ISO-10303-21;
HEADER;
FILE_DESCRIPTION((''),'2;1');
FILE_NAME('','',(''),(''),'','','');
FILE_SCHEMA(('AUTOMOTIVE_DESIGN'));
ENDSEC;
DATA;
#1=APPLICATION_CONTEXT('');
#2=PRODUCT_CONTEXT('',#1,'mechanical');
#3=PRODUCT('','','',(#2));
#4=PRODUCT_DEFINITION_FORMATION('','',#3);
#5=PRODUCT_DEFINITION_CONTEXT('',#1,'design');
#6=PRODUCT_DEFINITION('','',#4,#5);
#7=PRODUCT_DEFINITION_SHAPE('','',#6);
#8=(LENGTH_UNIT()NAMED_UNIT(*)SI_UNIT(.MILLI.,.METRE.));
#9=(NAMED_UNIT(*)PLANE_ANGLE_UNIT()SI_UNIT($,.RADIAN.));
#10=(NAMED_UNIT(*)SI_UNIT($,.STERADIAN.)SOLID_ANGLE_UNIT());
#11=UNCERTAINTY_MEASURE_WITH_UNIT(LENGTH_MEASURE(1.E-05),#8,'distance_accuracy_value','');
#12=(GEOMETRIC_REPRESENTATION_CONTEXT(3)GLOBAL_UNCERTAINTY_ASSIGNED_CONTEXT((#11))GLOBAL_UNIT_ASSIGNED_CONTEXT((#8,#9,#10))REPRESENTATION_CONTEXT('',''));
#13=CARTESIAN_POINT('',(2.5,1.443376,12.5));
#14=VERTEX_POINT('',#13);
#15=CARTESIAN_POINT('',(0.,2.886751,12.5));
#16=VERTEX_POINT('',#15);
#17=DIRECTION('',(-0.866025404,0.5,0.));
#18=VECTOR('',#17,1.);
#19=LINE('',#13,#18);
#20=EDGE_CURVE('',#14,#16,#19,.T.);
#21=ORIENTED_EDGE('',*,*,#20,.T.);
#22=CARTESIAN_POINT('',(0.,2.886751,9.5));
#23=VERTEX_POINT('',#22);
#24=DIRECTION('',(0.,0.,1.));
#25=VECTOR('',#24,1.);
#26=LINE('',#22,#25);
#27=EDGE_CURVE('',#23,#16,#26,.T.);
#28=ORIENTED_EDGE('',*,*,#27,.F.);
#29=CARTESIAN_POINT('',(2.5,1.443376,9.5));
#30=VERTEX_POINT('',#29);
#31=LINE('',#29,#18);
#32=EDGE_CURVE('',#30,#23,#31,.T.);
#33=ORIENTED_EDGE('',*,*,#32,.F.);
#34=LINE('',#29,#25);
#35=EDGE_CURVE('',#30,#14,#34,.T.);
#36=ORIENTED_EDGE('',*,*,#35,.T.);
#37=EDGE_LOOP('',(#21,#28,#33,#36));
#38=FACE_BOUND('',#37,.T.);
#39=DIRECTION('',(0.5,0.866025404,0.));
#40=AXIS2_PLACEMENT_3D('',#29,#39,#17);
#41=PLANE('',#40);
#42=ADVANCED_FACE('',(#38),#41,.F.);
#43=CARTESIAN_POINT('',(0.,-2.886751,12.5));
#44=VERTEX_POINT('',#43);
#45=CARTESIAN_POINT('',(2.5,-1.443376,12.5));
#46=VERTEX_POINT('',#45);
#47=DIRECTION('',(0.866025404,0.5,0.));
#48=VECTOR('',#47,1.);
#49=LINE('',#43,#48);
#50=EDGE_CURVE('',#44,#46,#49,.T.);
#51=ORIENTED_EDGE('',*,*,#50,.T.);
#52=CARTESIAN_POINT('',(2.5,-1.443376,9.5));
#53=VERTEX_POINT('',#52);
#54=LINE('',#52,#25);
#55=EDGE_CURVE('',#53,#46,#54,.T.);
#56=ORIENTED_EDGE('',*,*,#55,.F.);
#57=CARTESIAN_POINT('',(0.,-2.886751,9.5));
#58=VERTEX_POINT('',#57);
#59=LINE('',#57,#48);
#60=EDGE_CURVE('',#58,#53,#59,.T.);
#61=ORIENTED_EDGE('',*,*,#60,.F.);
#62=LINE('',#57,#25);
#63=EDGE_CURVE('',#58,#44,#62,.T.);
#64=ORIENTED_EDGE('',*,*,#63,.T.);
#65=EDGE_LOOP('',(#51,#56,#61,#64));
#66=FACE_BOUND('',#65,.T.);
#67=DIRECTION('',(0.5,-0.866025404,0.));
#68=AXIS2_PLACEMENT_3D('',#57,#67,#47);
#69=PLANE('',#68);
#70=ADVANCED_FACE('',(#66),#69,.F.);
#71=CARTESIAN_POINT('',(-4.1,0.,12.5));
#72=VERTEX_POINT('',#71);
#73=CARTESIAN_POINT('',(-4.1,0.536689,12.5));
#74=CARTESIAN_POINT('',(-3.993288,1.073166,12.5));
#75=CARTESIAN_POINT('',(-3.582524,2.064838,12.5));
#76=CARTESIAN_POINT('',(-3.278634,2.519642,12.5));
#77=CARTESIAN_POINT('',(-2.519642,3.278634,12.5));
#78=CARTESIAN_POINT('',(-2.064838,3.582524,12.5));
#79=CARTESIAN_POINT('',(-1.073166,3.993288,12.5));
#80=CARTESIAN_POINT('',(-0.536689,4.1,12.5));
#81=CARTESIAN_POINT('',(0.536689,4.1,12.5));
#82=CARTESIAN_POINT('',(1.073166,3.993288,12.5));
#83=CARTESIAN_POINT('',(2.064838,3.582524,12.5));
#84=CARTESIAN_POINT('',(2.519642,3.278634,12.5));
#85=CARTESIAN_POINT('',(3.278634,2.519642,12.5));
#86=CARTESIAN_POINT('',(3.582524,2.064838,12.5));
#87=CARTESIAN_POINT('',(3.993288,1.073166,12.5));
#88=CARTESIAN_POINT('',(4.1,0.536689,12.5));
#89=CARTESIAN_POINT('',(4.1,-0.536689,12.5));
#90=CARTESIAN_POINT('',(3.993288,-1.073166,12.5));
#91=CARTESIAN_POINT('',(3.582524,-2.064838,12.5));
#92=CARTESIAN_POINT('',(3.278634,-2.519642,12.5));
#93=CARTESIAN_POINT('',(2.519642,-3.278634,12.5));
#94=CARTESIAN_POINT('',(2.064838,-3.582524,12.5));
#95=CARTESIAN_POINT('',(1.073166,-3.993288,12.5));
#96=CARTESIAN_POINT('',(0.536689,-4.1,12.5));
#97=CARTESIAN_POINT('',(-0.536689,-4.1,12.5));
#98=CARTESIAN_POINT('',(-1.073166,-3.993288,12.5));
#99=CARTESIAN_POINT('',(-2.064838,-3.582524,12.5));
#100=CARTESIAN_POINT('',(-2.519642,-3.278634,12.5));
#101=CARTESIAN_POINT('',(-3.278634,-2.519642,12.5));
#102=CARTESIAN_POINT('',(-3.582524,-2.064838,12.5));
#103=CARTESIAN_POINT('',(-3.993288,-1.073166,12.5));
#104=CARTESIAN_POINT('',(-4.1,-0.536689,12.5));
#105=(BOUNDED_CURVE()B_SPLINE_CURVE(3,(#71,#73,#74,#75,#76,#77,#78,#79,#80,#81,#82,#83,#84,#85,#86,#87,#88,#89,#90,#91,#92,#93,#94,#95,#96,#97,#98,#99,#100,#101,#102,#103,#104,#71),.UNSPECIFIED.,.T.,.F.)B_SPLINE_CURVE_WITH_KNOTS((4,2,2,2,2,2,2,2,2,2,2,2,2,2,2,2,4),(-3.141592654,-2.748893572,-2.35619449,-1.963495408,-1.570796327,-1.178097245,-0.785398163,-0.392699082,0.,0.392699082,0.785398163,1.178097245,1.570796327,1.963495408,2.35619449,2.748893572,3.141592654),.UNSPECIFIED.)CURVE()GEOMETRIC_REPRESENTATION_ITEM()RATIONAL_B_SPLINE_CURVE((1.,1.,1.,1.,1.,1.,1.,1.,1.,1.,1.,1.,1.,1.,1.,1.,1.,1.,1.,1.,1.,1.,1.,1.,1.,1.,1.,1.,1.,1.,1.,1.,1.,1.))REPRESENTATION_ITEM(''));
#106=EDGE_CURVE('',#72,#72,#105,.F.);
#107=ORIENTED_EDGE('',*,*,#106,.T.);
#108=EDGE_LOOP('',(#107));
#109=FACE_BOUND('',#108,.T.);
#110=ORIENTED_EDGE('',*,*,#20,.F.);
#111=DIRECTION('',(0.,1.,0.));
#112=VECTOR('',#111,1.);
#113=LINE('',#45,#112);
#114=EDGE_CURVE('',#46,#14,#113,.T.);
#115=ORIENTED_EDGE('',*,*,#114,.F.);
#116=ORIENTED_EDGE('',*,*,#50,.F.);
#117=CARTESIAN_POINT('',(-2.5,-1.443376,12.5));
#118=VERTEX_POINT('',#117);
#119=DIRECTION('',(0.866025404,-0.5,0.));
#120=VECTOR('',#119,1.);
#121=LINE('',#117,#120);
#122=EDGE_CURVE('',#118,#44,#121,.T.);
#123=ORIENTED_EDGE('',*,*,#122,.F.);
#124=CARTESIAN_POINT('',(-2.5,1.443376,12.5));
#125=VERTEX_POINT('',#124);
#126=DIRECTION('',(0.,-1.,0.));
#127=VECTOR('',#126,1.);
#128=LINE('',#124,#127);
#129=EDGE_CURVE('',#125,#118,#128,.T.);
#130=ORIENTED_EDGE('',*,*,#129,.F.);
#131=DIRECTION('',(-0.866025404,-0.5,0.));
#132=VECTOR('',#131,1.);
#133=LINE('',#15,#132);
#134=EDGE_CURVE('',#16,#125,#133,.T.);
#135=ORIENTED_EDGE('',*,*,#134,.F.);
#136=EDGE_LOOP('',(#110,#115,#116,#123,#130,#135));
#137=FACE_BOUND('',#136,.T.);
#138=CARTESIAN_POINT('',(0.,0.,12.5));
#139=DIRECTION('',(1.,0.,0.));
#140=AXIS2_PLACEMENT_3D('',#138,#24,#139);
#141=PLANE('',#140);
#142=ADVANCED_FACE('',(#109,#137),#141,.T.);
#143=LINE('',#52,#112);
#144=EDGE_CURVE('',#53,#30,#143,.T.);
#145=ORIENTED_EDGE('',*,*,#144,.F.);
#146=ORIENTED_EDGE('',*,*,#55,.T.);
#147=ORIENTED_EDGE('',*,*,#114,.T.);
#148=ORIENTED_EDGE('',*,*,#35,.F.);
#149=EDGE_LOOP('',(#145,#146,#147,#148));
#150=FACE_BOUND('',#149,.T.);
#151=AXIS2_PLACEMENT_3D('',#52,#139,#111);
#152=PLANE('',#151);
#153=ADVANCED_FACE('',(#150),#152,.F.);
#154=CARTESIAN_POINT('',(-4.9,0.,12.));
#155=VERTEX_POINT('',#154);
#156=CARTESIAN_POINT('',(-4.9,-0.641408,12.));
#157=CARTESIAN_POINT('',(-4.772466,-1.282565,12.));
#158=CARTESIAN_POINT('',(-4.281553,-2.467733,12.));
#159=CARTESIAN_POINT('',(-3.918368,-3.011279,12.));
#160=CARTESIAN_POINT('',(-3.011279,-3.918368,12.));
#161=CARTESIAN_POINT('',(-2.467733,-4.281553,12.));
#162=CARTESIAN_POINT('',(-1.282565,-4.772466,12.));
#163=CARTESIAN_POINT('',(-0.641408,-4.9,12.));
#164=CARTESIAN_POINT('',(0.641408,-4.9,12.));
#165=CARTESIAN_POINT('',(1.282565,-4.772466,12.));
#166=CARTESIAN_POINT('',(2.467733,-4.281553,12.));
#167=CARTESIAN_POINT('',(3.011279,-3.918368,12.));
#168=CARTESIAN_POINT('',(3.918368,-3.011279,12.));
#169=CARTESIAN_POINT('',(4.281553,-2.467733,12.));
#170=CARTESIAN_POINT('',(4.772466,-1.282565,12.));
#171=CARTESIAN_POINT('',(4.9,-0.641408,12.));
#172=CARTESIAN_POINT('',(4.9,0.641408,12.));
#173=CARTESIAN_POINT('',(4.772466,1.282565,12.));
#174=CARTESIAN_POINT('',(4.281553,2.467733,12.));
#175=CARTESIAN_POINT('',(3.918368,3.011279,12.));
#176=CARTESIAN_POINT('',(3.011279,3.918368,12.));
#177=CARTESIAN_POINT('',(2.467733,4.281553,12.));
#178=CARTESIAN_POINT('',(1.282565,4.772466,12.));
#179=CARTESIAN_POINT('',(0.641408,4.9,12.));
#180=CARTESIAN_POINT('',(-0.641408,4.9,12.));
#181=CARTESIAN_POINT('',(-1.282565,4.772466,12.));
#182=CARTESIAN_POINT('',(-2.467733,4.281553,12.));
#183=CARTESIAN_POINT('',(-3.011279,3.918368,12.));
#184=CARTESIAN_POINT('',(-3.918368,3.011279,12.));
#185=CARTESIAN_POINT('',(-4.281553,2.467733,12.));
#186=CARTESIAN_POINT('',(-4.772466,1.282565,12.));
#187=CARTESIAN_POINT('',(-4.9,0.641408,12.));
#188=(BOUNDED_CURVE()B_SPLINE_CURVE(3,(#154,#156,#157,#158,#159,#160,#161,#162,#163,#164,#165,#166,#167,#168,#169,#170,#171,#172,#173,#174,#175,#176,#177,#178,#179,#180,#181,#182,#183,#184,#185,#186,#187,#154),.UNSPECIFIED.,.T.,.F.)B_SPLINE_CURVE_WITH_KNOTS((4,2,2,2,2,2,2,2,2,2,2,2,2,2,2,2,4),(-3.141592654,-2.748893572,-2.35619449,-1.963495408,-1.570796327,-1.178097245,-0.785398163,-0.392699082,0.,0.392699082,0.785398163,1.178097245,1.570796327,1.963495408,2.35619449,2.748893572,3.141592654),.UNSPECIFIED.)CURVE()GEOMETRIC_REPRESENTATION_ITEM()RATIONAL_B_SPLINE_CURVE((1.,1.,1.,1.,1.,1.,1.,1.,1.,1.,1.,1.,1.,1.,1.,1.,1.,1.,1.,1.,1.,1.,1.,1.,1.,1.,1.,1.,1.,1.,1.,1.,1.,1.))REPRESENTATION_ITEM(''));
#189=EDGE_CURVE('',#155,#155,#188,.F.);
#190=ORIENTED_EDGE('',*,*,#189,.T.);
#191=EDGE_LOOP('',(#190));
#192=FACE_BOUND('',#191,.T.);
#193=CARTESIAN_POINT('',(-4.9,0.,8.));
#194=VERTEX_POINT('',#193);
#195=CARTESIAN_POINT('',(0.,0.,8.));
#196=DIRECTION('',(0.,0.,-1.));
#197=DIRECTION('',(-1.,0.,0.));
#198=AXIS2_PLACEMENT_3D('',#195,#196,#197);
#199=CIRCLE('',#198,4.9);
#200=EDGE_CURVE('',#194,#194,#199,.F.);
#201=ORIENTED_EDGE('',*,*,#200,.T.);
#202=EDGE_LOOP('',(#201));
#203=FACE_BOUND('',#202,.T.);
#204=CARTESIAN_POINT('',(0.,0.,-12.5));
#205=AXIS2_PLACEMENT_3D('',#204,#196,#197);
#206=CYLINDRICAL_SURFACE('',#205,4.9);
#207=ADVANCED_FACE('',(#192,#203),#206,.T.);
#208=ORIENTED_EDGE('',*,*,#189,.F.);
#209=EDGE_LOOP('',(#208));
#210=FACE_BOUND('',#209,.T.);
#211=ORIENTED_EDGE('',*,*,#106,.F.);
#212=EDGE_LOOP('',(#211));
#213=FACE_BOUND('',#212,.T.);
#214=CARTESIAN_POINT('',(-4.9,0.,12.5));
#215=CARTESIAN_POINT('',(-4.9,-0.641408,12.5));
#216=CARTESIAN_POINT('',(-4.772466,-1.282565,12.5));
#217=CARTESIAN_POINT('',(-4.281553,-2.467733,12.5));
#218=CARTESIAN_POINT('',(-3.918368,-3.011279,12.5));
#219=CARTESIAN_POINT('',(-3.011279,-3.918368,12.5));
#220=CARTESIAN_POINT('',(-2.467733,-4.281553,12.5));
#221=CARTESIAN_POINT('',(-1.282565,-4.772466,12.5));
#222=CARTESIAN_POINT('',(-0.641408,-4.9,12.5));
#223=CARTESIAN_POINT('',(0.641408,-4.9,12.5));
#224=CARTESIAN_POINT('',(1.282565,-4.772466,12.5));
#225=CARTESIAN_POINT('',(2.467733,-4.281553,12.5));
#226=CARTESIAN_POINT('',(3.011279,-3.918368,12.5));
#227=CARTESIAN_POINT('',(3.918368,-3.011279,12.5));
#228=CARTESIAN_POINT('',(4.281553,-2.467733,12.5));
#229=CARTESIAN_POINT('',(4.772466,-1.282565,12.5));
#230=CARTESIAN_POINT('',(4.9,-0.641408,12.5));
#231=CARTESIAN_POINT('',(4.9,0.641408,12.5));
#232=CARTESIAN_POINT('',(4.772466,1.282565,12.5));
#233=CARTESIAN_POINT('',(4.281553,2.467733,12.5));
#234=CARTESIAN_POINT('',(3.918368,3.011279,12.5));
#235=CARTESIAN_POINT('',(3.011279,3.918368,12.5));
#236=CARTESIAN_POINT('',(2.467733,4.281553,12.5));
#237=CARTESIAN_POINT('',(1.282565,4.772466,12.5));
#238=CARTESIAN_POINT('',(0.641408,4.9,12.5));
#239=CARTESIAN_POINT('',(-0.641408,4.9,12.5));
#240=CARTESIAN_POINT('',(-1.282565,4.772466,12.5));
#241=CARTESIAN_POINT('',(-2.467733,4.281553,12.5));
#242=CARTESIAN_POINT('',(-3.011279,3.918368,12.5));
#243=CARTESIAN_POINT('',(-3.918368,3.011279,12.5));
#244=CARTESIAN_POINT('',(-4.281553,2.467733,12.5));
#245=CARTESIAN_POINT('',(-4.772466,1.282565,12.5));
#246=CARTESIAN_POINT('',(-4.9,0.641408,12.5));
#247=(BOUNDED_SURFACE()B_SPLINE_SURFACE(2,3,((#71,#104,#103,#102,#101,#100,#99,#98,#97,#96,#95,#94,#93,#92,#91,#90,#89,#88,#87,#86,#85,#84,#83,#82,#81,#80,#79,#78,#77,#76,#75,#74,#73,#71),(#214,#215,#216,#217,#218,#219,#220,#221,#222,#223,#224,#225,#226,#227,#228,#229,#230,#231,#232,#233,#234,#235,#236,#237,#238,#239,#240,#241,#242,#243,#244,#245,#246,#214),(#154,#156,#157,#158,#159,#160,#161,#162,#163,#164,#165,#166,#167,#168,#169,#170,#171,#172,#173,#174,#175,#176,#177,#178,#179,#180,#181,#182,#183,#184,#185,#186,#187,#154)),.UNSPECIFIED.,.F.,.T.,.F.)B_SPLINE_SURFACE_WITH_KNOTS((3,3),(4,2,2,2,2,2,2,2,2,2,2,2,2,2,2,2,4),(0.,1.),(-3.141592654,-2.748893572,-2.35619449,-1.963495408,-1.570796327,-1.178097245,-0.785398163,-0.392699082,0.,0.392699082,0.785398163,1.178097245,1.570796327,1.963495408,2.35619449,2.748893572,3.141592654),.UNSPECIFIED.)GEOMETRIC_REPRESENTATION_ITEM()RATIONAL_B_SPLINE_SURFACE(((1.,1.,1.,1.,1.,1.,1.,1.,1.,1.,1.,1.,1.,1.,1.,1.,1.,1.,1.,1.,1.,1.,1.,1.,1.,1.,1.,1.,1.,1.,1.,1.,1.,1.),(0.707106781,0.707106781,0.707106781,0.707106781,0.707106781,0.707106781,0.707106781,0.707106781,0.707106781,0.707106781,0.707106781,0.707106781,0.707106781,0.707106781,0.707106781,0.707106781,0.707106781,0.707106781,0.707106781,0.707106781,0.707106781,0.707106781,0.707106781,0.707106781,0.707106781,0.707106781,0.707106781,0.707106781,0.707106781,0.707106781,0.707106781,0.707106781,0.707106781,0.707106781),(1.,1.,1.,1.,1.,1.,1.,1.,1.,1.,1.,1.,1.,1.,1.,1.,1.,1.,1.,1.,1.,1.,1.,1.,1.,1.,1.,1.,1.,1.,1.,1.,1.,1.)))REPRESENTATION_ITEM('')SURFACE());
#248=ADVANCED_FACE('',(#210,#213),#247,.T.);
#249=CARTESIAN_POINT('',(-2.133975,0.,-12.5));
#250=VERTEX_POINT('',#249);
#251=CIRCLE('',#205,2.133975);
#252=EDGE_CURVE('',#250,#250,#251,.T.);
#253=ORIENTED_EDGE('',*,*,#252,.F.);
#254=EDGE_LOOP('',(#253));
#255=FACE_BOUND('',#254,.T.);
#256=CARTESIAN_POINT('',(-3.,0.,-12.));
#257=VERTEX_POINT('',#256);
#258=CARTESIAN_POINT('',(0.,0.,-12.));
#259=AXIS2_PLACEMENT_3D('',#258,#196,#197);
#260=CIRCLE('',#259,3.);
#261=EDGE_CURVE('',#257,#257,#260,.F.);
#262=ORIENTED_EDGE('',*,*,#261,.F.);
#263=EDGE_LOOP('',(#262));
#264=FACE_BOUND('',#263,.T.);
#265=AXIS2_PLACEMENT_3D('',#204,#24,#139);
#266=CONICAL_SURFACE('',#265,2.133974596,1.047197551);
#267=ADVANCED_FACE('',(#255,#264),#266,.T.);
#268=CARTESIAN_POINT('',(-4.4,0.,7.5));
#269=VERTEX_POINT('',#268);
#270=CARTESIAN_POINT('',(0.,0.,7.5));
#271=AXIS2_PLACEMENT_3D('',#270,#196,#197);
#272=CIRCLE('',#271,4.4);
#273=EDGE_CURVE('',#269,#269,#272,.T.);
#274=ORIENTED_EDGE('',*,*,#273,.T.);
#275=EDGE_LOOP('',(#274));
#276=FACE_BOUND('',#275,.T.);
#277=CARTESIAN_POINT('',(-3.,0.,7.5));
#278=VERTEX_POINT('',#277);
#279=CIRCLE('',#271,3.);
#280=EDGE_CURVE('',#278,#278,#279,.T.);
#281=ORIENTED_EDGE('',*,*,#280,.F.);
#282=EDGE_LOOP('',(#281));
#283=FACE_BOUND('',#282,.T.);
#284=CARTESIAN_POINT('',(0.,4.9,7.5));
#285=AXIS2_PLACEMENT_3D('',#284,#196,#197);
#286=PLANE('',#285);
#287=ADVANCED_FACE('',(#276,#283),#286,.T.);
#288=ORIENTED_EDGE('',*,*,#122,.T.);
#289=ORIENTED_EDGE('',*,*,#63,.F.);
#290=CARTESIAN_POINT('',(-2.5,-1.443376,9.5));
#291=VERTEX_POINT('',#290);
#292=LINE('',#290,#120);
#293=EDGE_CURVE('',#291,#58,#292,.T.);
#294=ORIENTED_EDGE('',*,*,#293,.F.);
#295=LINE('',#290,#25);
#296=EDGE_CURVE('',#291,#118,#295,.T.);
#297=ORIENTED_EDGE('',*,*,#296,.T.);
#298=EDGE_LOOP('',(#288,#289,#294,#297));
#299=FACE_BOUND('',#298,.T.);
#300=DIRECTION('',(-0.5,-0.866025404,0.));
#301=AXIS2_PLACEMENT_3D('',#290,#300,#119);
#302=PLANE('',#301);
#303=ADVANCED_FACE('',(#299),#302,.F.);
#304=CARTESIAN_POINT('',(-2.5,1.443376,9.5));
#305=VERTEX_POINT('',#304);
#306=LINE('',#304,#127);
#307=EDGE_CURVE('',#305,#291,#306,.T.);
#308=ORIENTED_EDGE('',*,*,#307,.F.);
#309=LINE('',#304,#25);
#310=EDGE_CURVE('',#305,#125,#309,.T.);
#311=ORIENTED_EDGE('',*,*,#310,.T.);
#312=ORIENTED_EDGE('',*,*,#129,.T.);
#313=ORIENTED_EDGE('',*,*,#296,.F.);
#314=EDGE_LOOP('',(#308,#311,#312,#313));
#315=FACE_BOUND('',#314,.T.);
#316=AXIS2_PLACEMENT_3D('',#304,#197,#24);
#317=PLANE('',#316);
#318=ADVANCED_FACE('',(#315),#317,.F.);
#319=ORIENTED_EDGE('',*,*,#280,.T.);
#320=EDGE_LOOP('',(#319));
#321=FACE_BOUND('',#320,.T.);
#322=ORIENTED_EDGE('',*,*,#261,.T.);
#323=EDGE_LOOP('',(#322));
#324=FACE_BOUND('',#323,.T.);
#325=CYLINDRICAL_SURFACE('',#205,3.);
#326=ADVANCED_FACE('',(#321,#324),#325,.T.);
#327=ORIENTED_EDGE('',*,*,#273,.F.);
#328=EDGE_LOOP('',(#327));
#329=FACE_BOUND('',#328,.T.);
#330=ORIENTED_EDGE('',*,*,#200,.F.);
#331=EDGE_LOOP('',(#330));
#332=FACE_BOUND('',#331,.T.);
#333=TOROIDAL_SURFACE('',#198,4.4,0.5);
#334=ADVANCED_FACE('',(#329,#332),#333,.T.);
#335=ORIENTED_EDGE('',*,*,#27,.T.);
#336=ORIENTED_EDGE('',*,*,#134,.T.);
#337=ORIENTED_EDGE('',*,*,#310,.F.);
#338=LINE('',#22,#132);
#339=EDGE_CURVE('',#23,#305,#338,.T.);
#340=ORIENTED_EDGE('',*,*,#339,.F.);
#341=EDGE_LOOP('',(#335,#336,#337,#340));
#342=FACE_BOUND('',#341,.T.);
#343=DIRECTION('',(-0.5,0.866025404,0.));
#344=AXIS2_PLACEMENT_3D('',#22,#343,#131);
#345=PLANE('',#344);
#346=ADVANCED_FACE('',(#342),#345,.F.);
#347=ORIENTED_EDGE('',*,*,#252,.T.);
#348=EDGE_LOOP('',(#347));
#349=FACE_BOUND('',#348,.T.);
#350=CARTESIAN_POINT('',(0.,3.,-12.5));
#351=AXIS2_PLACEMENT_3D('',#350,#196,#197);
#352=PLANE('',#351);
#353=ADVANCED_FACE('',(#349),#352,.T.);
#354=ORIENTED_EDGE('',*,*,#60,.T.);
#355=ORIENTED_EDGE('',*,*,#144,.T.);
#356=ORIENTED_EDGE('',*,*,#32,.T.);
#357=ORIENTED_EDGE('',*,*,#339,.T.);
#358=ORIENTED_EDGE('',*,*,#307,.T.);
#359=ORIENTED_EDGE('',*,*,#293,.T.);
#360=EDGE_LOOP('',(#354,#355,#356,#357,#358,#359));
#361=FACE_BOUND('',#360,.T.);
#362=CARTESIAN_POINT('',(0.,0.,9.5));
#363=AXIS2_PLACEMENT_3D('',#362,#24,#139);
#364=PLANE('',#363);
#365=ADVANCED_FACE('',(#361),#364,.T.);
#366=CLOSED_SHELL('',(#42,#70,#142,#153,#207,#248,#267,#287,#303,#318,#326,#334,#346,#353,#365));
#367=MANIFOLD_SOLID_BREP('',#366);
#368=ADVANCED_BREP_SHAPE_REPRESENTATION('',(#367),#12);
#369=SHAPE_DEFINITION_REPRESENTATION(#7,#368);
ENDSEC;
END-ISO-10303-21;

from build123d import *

# Parameters (mm, degrees)
FILLET_1_R          = 0.5
FILLET_2_SIZE       = 0.5
FILLET_2_SIZE_2     = 0.8
CHAMFER_1_SIZE      = 0.5
CHAMFER_1_SIZE2     = 0.866025404
CUT_EXTRUDE_1_DEPTH = 3


with BuildPart() as part:
    # 草图2 → 旋转1 (revolve)
    with BuildSketch(Plane(origin=(0, 0, 0), x_dir=(0, 0, -1), z_dir=(1, 0, 0)), mode=Mode.PRIVATE) as revolve_1_sk:
        Polygon((-12.5, 0), (-12.5, 4.9), (-7.5, 4.9), (-7.5, 3), (12.5, 3), (12.5, 0), align=None)
    revolve(revolve_1_sk.sketch.rotate(Axis((0, 0, -12.5), (0, 0, 1)), 90), axis=Axis((0, 0, -12.5), (0, 0, 1)))

    # 圆角1
    fillet_1_edges = [part.edges().sort_by_distance(p)[0] for p in [
        (4.9, 0, 7.5),
    ]]
    fillet(fillet_1_edges, radius=FILLET_1_R)

    # 圆角2
    # an asymmetric fillet: 0.8, 0.5 mm, written as the material it takes off along each edge
    with BuildSketch(Plane(origin=(0, 0, 12.5), x_dir=(-1, 0, 0), z_dir=(0, 1, 0))) as fillet_2_piece_1:
        with BuildLine():
            Bezier((4.9, -FILLET_2_SIZE), (4.9, 0), (4.9 - FILLET_2_SIZE_2, 0), weights=[1, 0.707106781, 1])
            Line((4.9 - FILLET_2_SIZE_2, 0), (4.9, 0))
            Line((4.9, 0), (4.9, -FILLET_2_SIZE))
        make_face()
    revolve(axis=Axis((0, 0, 12.5), (0, 0, 1)), mode=Mode.SUBTRACT)

    # 倒角1
    chamfer_1_edges = [part.edges().sort_by_distance(p)[0] for p in [
        (3, 0, -12.5),
    ]]
    chamfer_1_side = [part.faces().sort_by_distance(p)[0] for p in [
        (3, 0, -2.5),
    ]]
    chamfer(chamfer_1_edges, length=CHAMFER_1_SIZE, length2=CHAMFER_1_SIZE2, reference=chamfer_1_side[0])

    # 草图3 → 切除-拉伸1 (cut)
    with BuildSketch(Plane.XY.offset(12.5)):
        Polygon((0, 2.886751346), (-2.5, 1.443375673), (-2.5, -1.443375673), (0, -2.886751346), (2.5, -1.443375673), (2.5, 1.443375673), align=None)
    extrude(amount=-CUT_EXTRUDE_1_DEPTH, mode=Mode.SUBTRACT)


solid = part.part
